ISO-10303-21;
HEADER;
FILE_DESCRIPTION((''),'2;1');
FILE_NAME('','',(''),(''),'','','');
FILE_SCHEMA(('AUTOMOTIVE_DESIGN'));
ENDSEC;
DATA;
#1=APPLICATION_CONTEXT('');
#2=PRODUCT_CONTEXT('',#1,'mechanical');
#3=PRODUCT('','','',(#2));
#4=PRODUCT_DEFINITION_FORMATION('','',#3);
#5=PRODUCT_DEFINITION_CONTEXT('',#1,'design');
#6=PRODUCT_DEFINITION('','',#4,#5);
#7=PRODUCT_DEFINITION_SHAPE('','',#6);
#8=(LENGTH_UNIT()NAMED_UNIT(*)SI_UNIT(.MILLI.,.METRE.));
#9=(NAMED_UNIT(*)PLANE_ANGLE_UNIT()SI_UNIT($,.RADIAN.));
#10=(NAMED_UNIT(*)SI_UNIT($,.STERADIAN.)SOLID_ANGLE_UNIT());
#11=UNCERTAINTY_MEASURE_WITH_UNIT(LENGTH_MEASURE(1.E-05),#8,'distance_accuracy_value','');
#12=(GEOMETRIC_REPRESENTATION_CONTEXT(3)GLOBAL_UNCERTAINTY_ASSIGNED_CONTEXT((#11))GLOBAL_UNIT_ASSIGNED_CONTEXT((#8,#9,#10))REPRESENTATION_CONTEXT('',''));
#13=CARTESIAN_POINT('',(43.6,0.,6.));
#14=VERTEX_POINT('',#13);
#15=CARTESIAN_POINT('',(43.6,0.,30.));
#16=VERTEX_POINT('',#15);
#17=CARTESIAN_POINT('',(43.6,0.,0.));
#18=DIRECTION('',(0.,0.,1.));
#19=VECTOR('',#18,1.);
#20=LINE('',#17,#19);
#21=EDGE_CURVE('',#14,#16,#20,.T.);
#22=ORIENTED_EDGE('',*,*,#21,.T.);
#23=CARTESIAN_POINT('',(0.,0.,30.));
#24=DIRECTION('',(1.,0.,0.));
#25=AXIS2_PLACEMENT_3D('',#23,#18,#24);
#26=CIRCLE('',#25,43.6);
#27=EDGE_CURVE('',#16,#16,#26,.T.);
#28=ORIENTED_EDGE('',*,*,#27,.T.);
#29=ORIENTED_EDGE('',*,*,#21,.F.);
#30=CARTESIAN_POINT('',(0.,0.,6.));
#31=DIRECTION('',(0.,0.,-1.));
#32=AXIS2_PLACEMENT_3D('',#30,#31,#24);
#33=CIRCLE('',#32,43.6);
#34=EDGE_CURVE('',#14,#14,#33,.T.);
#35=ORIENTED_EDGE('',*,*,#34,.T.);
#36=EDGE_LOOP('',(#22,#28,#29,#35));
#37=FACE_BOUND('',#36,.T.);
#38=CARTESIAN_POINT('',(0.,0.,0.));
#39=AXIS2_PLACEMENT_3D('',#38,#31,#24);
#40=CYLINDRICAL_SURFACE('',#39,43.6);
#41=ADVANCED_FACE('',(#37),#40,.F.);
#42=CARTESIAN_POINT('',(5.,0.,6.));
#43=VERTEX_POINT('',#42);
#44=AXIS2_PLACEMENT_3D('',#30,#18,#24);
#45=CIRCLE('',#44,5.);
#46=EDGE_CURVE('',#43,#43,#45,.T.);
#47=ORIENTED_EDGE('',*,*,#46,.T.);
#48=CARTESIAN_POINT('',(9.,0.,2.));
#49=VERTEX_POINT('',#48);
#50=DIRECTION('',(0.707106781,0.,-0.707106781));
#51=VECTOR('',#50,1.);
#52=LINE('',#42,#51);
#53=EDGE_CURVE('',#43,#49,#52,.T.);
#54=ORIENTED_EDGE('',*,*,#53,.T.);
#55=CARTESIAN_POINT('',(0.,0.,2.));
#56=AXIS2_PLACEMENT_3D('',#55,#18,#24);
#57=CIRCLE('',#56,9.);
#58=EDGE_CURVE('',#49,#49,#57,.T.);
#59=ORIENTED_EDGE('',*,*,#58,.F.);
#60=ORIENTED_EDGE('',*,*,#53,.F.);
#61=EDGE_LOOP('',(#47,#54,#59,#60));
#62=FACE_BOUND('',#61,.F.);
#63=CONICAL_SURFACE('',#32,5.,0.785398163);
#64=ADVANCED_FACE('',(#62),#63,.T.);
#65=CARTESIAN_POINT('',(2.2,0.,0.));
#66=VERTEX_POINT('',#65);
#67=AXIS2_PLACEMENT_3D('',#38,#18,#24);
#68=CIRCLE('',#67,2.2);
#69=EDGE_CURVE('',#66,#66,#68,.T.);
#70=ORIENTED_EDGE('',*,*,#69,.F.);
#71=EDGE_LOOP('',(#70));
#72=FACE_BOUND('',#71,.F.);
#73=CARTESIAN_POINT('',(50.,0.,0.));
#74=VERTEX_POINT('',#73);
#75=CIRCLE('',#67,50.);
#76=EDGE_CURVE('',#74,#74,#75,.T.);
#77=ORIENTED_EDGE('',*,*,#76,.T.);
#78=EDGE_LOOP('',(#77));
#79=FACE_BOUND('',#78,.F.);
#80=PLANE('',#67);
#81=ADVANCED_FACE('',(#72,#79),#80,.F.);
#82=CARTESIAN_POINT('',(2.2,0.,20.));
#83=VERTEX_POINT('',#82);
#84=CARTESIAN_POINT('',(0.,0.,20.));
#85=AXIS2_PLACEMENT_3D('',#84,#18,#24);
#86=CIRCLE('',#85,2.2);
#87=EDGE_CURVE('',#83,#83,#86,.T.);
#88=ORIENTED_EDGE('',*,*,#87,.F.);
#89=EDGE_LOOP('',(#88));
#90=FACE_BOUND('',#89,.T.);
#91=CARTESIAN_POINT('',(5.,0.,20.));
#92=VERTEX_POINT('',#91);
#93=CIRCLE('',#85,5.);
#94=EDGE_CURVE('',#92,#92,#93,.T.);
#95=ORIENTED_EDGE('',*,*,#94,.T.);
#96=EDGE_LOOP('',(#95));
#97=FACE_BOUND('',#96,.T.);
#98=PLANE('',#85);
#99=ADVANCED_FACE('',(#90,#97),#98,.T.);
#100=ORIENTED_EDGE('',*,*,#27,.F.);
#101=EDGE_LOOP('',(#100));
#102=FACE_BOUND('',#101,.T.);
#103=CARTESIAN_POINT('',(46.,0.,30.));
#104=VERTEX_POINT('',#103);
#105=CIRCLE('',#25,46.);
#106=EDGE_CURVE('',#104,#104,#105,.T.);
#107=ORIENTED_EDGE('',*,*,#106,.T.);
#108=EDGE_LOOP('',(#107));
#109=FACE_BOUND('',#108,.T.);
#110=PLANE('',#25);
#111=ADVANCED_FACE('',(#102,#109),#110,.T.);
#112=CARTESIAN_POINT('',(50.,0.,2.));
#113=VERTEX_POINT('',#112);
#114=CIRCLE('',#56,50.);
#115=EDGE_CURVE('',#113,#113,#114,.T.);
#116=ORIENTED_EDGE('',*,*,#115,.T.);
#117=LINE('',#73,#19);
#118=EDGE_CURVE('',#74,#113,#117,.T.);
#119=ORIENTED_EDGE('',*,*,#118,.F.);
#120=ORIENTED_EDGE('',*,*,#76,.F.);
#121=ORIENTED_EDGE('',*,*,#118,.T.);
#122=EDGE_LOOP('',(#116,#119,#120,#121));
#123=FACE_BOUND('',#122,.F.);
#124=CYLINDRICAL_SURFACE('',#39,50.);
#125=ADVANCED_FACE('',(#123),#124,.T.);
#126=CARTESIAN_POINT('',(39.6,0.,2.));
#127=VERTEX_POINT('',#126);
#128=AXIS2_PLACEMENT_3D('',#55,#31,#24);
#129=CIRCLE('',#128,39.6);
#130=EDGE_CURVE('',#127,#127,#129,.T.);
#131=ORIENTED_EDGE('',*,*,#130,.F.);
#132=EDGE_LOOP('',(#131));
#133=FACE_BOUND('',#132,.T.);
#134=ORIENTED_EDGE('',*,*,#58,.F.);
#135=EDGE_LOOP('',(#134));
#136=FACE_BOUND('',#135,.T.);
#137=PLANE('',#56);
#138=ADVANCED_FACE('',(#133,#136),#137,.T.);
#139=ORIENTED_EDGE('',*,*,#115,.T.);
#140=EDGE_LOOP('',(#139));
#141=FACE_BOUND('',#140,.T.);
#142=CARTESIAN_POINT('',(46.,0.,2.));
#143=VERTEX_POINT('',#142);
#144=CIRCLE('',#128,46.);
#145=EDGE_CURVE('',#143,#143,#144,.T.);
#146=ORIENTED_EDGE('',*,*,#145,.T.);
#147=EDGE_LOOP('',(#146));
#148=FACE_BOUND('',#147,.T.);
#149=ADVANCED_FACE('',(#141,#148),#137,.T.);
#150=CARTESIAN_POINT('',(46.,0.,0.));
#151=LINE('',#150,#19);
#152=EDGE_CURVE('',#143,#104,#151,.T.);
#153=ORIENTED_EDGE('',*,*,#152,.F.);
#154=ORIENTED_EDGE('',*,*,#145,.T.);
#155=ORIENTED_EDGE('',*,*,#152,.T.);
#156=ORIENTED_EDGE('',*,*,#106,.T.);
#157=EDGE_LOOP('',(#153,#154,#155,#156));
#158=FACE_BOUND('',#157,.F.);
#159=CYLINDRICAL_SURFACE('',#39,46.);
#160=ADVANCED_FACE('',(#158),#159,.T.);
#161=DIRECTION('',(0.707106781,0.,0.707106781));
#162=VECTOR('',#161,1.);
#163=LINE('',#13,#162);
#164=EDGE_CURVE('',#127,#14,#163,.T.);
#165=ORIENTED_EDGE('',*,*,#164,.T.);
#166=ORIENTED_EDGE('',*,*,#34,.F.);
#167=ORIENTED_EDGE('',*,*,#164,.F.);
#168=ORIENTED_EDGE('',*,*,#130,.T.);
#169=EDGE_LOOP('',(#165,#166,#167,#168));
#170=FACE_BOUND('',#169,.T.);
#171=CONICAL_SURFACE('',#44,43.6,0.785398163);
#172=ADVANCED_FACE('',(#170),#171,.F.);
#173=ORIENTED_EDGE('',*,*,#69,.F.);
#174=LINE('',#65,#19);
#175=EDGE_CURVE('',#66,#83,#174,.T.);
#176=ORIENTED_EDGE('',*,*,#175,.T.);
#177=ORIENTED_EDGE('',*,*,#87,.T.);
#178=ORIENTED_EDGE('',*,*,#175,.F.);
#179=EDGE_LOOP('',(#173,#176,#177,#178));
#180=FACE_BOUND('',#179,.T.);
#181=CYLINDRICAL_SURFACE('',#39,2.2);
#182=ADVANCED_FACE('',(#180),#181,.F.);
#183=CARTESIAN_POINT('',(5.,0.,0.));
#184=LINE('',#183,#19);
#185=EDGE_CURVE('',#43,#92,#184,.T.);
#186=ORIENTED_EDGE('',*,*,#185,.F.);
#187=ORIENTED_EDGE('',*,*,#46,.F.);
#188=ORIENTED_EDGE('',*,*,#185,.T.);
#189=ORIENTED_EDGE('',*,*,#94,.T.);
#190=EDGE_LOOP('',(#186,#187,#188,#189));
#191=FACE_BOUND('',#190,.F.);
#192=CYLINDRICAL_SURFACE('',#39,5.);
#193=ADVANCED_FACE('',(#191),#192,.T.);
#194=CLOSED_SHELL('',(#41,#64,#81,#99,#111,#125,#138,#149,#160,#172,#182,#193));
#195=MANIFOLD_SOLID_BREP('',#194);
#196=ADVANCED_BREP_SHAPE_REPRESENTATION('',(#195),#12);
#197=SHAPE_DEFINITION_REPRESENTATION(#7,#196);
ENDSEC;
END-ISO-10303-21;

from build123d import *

# Parameters (mm, degrees)
F0_R     = 50
F0_R_2   = 46
F0_R_3   = 43.6
F0_R_4   = 5
F1_DEPTH = 2
F2_DEPTH = 30
F0_R_5   = 2.2
F3_DEPTH = 20
F4_SIZE  = 4


with BuildPart() as f1:
    # F0 (on Top) → F1 (new body)
    with BuildSketch(Plane.XY):
        Circle(F0_R)
        Circle(F0_R_2, mode=Mode.SUBTRACT)
        Circle(F0_R_2)
        Circle(F0_R_3, mode=Mode.SUBTRACT)
        Circle(F0_R_3)
        Circle(F0_R_4, mode=Mode.SUBTRACT)
    extrude(amount=F1_DEPTH)

    # F0 (on Top) → F2 (join)
    with BuildSketch(Plane.XY):
        Circle(F0_R_2)
        Circle(F0_R_3, mode=Mode.SUBTRACT)
    extrude(amount=F2_DEPTH)

    # F0 (on Top) → F3 (join)
    with BuildSketch(Plane.XY):
        Circle(F0_R_4)
        Circle(F0_R_5, mode=Mode.SUBTRACT)
    extrude(amount=F3_DEPTH)

    # F4
    f4_edges = [f1.edges().sort_by_distance(p)[0] for p in [
        (-5, 0, 2),
        (-43.6, 0, 2),
    ]]
    chamfer(f4_edges, length=F4_SIZE)


solid = f1.part
